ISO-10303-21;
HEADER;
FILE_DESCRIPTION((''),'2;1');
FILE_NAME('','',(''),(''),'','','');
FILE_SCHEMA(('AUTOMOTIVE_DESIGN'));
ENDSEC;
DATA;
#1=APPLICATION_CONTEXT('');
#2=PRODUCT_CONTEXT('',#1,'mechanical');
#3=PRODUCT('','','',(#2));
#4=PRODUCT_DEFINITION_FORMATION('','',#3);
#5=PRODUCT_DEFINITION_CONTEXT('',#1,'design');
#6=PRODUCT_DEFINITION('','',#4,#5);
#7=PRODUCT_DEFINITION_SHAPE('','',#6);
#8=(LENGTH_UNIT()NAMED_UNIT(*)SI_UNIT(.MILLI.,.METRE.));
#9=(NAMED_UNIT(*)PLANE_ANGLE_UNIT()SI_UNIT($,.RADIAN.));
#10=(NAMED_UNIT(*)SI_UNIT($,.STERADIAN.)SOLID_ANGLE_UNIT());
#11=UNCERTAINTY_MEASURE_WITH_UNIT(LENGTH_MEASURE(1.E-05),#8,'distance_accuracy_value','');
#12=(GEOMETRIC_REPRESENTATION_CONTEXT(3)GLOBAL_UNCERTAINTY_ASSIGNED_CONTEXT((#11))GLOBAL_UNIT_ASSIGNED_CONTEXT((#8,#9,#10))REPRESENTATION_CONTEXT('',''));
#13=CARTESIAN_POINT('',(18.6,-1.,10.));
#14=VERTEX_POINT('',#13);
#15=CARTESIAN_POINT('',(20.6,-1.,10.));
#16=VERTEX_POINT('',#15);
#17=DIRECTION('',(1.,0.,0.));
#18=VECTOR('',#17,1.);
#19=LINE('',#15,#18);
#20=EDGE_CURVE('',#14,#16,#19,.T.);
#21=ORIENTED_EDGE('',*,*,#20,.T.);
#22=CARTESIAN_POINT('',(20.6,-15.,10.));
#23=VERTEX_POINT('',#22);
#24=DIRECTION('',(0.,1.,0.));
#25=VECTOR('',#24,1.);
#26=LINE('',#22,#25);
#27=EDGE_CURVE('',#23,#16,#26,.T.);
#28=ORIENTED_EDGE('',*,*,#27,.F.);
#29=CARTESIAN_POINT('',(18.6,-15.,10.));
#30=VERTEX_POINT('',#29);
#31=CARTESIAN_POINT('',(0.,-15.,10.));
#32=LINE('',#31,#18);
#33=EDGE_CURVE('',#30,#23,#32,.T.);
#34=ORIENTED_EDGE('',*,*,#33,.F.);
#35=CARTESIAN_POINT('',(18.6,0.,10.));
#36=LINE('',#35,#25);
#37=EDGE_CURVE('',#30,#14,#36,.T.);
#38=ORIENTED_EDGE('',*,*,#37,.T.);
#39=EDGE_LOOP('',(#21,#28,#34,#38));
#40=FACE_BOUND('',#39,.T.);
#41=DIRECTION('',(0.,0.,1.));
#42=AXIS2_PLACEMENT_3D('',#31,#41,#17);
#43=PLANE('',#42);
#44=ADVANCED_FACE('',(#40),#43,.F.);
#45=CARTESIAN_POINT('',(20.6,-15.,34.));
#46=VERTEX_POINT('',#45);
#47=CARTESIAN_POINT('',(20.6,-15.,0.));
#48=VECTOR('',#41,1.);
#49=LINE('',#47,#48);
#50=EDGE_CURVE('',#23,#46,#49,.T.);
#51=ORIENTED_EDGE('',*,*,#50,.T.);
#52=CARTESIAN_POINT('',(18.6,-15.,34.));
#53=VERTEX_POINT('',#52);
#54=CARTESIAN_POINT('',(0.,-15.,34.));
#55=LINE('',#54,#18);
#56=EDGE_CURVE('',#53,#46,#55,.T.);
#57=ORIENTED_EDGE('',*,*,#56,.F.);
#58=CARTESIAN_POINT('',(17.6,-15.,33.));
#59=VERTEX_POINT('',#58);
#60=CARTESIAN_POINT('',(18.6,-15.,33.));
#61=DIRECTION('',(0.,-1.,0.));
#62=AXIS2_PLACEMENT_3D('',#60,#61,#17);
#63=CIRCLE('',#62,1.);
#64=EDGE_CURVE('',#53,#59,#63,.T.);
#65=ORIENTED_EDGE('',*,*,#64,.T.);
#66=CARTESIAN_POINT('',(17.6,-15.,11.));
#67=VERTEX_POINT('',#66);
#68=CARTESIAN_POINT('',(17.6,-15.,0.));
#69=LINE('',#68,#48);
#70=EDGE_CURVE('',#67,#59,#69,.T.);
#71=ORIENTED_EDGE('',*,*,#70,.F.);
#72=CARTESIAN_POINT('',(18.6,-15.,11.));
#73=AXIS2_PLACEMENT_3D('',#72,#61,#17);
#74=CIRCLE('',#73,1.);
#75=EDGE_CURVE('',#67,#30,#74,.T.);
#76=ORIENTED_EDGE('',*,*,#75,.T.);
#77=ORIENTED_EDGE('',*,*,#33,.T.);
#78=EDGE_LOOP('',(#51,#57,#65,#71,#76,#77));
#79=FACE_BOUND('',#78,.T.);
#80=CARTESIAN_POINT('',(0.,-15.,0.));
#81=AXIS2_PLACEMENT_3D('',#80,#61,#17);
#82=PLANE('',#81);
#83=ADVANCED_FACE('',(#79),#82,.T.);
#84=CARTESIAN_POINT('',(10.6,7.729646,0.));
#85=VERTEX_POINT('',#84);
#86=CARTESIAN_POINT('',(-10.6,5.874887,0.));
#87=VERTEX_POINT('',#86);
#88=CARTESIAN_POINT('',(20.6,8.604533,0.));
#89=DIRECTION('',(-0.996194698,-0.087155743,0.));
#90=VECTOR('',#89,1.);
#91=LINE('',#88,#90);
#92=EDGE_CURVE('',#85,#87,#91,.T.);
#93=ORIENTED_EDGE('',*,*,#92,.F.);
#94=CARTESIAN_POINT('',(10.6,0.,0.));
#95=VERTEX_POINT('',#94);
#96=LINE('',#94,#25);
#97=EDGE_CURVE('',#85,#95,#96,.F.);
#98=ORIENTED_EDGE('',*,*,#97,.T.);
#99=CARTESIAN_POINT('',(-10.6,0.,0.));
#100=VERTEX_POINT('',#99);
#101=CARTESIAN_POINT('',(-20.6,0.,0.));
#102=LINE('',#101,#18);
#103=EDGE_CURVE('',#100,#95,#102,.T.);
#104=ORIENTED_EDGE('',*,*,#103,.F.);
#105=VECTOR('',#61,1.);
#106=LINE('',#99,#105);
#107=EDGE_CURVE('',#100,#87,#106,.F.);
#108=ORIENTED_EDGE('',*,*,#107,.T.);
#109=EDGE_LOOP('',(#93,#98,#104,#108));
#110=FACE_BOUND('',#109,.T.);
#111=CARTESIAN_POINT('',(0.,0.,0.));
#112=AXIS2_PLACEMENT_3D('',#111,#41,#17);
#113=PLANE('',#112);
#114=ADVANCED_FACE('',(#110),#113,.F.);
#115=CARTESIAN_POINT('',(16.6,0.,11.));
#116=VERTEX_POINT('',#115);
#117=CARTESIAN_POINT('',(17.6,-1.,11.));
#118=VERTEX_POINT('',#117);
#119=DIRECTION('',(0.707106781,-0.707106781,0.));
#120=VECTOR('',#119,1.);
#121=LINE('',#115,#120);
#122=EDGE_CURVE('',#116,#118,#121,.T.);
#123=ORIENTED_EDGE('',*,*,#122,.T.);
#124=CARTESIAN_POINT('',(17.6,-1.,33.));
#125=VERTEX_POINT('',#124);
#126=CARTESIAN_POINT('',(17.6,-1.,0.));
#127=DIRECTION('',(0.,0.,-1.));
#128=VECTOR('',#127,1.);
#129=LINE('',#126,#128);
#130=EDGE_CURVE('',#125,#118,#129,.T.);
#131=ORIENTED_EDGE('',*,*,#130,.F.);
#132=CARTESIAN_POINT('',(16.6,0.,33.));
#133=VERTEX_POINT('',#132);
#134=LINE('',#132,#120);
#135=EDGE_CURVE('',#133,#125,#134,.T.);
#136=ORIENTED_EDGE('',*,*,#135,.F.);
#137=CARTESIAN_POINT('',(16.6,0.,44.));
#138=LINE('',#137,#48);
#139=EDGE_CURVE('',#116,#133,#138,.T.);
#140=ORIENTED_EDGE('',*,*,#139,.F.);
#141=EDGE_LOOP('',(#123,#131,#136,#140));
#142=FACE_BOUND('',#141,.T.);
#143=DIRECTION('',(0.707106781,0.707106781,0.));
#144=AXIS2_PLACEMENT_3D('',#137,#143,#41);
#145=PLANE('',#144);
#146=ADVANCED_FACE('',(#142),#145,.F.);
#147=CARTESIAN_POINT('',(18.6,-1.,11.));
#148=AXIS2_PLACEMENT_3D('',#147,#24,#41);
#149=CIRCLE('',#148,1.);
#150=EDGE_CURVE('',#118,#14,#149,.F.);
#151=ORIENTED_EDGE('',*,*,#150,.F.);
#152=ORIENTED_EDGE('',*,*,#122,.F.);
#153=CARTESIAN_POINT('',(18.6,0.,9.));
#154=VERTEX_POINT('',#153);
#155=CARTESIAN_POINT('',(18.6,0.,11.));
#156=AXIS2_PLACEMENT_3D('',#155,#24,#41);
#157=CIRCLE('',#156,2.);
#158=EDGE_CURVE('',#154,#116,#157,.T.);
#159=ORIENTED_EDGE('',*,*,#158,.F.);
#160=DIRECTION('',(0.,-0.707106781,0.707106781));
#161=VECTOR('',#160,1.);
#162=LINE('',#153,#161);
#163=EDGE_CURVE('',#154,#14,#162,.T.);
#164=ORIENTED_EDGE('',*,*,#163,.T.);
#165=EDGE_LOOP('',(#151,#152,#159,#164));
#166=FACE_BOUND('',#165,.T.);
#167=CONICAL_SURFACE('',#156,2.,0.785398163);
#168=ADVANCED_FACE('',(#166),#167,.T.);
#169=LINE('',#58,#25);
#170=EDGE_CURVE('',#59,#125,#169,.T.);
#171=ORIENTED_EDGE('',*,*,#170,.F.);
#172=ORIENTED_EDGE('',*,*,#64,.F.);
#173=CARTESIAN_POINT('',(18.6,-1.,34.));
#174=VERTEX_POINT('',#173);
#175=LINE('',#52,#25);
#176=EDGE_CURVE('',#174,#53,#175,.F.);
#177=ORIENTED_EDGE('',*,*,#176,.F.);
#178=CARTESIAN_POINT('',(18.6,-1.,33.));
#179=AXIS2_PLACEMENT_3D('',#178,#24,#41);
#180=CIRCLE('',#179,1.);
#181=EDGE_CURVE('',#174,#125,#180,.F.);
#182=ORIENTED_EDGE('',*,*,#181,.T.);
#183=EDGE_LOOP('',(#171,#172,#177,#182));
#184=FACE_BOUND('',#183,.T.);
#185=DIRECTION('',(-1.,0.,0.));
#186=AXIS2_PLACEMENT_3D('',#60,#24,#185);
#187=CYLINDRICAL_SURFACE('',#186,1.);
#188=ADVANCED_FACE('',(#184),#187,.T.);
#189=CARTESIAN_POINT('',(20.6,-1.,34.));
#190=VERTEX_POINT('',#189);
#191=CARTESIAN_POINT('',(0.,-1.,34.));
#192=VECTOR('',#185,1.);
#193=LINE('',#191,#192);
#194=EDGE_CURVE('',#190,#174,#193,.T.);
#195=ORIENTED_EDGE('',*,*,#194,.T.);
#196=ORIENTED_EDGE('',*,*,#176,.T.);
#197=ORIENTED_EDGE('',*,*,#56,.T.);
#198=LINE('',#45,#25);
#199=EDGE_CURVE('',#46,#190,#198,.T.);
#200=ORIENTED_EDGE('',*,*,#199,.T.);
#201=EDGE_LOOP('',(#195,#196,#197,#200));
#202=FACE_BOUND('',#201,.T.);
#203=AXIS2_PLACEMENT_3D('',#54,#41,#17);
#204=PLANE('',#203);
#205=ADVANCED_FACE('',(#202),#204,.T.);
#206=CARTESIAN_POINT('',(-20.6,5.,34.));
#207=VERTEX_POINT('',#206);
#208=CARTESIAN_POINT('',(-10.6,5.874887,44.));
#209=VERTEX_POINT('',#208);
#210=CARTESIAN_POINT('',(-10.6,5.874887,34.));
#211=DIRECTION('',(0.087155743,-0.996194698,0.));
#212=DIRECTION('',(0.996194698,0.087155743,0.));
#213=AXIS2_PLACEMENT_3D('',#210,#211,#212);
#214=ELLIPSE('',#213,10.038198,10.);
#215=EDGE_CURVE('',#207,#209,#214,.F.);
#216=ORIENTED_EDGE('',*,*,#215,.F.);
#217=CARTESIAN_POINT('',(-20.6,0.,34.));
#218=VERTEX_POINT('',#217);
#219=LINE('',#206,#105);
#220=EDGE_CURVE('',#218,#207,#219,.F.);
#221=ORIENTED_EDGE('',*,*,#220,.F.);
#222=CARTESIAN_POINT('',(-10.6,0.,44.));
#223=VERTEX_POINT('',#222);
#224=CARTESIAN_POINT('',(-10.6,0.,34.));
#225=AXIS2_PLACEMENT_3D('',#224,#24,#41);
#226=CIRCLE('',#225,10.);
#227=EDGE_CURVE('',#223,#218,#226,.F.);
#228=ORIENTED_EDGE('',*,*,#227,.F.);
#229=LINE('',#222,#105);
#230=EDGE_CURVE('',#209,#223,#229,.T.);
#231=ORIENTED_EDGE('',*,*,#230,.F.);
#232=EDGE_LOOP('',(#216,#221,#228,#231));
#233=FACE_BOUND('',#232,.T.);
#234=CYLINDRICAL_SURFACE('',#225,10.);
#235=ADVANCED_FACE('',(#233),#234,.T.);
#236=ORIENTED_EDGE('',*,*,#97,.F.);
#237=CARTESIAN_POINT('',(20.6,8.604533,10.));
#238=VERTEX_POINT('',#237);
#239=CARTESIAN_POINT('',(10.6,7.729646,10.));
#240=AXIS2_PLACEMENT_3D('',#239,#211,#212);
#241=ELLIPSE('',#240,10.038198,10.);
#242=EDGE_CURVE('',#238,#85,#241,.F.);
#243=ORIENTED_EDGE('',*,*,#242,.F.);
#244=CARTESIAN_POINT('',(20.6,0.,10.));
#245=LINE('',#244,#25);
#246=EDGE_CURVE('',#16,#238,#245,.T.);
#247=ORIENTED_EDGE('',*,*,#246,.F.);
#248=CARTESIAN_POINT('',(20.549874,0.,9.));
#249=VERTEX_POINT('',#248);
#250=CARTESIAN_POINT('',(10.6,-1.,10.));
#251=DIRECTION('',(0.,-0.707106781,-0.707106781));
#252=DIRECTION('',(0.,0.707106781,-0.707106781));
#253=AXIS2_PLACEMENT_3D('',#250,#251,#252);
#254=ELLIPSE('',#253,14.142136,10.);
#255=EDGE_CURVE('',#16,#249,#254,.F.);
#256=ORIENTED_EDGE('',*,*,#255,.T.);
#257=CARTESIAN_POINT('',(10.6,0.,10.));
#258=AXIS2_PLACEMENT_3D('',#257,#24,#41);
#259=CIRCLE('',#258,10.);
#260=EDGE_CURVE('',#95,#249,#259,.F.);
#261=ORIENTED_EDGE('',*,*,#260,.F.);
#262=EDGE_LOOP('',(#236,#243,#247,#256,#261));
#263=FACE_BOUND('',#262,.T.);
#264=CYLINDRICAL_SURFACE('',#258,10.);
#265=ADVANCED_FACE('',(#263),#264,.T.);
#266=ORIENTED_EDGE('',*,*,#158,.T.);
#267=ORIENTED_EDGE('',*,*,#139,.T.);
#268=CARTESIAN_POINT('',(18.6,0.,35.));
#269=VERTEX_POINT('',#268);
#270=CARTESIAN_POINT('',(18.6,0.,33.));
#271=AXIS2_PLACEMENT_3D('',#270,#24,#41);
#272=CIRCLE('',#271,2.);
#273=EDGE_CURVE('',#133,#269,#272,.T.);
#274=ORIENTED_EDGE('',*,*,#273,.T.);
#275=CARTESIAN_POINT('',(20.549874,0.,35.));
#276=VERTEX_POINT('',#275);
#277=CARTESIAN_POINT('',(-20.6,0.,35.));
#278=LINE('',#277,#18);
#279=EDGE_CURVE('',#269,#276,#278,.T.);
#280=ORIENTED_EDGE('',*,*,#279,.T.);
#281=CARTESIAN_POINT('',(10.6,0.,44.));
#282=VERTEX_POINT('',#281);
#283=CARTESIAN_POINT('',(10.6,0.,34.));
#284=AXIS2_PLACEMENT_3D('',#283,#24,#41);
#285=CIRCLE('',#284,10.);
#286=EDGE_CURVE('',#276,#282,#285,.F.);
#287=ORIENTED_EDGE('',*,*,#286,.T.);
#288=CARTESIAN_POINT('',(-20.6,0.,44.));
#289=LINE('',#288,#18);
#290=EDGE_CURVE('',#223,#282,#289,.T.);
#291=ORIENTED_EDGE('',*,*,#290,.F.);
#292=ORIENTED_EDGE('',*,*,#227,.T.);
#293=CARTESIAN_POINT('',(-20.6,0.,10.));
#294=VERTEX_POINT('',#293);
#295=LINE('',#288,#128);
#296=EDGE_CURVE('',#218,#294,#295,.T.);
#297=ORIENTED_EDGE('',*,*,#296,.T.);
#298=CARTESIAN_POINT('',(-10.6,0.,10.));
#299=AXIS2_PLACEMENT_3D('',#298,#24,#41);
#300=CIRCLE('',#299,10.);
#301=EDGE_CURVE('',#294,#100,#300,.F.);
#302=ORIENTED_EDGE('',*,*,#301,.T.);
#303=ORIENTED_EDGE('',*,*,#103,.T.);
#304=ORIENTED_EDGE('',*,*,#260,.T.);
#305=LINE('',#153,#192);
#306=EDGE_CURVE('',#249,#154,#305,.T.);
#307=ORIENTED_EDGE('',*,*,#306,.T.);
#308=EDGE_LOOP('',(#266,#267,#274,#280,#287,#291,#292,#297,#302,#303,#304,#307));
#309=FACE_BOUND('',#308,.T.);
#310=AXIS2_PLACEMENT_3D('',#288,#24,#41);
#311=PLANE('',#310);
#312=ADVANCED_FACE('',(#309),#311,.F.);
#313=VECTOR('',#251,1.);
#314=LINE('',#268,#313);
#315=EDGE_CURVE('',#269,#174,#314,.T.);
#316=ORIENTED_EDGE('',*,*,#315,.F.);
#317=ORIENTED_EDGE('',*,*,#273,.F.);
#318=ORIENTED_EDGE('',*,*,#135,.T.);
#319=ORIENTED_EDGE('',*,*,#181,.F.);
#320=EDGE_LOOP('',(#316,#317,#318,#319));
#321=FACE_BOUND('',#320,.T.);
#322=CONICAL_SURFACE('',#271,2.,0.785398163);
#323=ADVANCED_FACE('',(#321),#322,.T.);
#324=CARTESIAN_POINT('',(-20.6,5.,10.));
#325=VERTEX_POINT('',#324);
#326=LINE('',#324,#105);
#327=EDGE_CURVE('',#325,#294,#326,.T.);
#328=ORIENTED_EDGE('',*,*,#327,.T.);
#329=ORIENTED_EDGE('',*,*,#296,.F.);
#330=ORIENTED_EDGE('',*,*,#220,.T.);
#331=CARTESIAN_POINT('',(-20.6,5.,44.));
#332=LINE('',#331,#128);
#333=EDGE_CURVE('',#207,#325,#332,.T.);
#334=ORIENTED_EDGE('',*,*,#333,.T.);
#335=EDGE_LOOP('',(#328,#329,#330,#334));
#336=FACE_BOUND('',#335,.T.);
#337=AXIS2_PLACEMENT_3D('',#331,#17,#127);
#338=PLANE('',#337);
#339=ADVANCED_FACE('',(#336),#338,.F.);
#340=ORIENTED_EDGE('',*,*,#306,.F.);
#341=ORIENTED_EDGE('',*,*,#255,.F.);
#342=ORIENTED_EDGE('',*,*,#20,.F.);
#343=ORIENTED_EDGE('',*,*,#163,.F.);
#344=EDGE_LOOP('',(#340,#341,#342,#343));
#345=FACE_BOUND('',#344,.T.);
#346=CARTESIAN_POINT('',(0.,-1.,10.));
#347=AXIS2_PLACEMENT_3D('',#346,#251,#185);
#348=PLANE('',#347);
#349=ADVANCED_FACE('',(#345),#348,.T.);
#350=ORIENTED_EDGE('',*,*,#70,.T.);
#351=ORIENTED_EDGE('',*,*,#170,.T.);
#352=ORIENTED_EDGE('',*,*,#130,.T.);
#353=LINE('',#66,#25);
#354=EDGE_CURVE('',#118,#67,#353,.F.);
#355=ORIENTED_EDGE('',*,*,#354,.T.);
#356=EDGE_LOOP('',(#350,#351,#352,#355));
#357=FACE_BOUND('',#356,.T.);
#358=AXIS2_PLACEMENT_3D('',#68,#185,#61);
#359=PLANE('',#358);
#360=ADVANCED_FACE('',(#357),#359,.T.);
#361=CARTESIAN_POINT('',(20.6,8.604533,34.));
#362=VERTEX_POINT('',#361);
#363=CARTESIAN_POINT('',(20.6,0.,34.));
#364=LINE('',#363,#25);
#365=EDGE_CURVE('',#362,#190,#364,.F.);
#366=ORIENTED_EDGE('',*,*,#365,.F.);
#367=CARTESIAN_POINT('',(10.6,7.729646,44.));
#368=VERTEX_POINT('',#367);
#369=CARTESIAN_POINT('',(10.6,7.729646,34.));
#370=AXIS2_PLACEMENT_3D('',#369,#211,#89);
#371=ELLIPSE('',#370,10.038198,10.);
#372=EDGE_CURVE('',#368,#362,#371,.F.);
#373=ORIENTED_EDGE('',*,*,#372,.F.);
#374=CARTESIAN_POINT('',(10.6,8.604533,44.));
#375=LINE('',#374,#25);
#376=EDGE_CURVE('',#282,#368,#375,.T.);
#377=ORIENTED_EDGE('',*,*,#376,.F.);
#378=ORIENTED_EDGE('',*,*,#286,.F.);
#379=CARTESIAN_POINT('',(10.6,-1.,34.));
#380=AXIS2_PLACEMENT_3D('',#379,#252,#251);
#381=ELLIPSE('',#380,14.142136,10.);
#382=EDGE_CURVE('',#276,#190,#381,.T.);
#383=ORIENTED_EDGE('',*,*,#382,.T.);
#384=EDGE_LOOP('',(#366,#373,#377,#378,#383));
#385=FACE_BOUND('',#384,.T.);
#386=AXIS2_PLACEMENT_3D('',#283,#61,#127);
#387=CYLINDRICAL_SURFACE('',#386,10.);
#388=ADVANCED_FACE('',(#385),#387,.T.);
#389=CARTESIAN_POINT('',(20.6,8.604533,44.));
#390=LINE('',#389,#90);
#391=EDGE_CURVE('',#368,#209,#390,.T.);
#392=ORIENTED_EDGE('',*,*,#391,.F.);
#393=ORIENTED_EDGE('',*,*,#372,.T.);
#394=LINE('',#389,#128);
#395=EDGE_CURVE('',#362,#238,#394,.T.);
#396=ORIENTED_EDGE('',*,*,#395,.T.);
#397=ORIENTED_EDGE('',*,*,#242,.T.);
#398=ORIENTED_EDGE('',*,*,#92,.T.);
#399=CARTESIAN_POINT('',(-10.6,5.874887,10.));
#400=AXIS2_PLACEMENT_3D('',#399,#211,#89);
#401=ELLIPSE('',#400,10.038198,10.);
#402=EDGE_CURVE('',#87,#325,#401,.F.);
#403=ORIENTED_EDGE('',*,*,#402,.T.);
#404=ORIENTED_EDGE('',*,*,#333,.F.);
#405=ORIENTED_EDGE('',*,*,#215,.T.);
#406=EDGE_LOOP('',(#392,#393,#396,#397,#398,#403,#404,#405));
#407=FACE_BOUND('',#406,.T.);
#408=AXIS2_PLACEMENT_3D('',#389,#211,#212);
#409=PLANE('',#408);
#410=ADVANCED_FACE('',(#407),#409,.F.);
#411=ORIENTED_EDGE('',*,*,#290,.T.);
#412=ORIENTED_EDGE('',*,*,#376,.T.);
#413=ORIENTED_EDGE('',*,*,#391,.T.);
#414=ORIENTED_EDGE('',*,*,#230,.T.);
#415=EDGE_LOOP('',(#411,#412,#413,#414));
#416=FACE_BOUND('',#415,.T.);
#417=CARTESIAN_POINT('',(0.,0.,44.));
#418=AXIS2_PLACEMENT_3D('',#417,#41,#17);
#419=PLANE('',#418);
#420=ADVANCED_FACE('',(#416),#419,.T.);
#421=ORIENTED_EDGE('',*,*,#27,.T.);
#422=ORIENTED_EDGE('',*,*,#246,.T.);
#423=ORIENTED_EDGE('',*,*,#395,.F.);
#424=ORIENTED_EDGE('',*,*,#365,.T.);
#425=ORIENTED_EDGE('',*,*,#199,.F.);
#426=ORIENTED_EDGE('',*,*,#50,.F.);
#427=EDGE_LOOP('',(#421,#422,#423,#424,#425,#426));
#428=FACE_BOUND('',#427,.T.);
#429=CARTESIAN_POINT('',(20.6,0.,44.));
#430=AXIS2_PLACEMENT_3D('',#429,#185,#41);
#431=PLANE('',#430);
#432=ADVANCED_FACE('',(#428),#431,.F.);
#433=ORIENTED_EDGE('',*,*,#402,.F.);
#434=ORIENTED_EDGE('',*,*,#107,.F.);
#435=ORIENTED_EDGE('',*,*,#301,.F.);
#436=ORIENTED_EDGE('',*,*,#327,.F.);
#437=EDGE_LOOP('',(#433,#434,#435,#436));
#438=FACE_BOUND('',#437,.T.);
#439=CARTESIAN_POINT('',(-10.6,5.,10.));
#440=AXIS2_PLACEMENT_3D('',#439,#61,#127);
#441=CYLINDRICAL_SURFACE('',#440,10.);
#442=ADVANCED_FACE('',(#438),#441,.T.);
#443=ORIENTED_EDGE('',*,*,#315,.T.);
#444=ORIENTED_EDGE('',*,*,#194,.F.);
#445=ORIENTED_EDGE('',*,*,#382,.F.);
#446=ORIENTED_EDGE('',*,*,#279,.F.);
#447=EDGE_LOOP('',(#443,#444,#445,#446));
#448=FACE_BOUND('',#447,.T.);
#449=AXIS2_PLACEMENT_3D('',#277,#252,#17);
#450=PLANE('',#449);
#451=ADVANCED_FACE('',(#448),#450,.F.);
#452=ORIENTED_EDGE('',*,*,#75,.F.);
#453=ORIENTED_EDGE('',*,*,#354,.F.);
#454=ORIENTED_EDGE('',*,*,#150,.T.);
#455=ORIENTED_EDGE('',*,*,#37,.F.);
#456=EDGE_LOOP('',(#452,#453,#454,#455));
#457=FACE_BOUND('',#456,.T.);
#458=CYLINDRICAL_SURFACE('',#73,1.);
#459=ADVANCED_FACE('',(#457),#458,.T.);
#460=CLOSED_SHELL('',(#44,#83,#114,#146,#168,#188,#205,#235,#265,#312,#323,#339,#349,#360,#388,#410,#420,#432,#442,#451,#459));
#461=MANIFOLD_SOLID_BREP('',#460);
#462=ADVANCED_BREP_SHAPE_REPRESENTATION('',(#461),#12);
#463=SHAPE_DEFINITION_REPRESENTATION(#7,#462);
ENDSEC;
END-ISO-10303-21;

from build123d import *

# Parameters (mm, degrees)
BOSS_EXTRUDE1_DEPTH = 44
FILLET1_R           = 10
SKETCH5_W           = 3
SKETCH5_H           = 24
BOSS_EXTRUDE3_DEPTH = 15
FILLET4_R           = 1
CHAMFER3_SIZE       = 1


with BuildPart() as part:
    # Sketch1 → Boss-Extrude1 (new body)
    with BuildSketch(Plane.XY):
        Polygon((-20.6, 0), (20.6, 0), (20.6, 8.604532937), (-20.6, 5), align=None)
    extrude(amount=BOSS_EXTRUDE1_DEPTH)

    # Fillet1
    fillet1_edges = [part.edges().sort_by_distance(p)[0] for p in [
        (20.6, 4.302266469, 44),
        (-20.6, 2.5, 44),
        (20.6, 4.302266469, 0),
        (-20.6, 2.5, 0),
    ]]
    fillet(fillet1_edges, radius=FILLET1_R)

    # Sketch5 → Boss-Extrude3 (add)
    with BuildSketch(Plane.XZ):
        with Locations((19.1, 22)):
            Rectangle(SKETCH5_W, SKETCH5_H)
    extrude(amount=BOSS_EXTRUDE3_DEPTH)

    # Fillet4
    fillet4_edges = [part.edges().sort_by_distance(p)[0] for p in [
        (17.6, -7.5, 34),
        (17.6, -7.5, 10),
    ]]
    fillet(fillet4_edges, radius=FILLET4_R)

    # Chamfer3
    # the kernel refuses this chamfer: 1 mm, written as the material it adds along each edge
    with BuildSketch(Plane(origin=(17.6, 0, 11), x_dir=(-0.9996219169112952, 0.027495876610644465, 0), z_dir=(0, 0, 1))) as chamfer3_piece_1:
        Polygon((CHAMFER3_SIZE * 0.999621916911, CHAMFER3_SIZE * 0.0274958766106), (-CHAMFER3_SIZE * 0.0274958766106, CHAMFER3_SIZE * 0.999621916911), (0, 0), align=None)
    extrude(amount=22)
    with BuildSketch(Plane(origin=(18.6, 0, 34), x_dir=(0, 0.027495876610647806, 0.999621916911295), z_dir=(1, 0, 0))) as chamfer3_piece_2_section:
        Polygon((CHAMFER3_SIZE * 0.999621916911, CHAMFER3_SIZE * 0.0274958766106), (-CHAMFER3_SIZE * 0.0274958766106, CHAMFER3_SIZE * 0.999621916911), (0, 0), align=None)
    chamfer3_piece_2 = extrude(amount=4.571682988, mode=Mode.PRIVATE)
    chamfer3_piece_2 = chamfer3_piece_2 & Plane(origin=(10.6, -0.333892015, 34), x_dir=(1, 0, 0), z_dir=(0, 1, 0)) * Cylinder(10, 14, mode=Mode.PRIVATE)
    add(chamfer3_piece_2)
    with BuildSketch(Plane(origin=(23.171682988, 0, 10), x_dir=(0, 0.02749587661058639, -0.9996219169112968), z_dir=(-1, 0, 0))) as chamfer3_piece_3_section:
        Polygon((CHAMFER3_SIZE * 0.999621916911, CHAMFER3_SIZE * 0.0274958766106), (-CHAMFER3_SIZE * 0.0274958766106, CHAMFER3_SIZE * 0.999621916911), (0, 0), align=None)
    chamfer3_piece_3 = extrude(amount=4.571682988, mode=Mode.PRIVATE)
    chamfer3_piece_3 = chamfer3_piece_3 & Plane(origin=(10.6, -0.333892015, 10), x_dir=(1, 0, 0), z_dir=(0, 1, 0)) * Cylinder(10, 14, mode=Mode.PRIVATE)
    add(chamfer3_piece_3)
    with BuildSketch(Plane(origin=(18.6, 0, 33), x_dir=(-1, 0, 0), z_dir=(0, 0, -1))) as chamfer3_piece_4:
        Polygon((1 + CHAMFER3_SIZE, 0), (1, -CHAMFER3_SIZE), (1, 0), align=None)
    revolve(axis=Axis((18.6, 0, 33), (0, 1, 0)), revolution_arc=90)
    with BuildSketch(Plane(origin=(18.6, 0, 11), x_dir=(0, 0, -1), z_dir=(1, 0, 0))) as chamfer3_piece_5:
        Polygon((1 + CHAMFER3_SIZE, 0), (1, -CHAMFER3_SIZE), (1, 0), align=None)
    revolve(axis=Axis((18.6, 0, 11), (0, 1, 0)), revolution_arc=90)


solid = part.part
